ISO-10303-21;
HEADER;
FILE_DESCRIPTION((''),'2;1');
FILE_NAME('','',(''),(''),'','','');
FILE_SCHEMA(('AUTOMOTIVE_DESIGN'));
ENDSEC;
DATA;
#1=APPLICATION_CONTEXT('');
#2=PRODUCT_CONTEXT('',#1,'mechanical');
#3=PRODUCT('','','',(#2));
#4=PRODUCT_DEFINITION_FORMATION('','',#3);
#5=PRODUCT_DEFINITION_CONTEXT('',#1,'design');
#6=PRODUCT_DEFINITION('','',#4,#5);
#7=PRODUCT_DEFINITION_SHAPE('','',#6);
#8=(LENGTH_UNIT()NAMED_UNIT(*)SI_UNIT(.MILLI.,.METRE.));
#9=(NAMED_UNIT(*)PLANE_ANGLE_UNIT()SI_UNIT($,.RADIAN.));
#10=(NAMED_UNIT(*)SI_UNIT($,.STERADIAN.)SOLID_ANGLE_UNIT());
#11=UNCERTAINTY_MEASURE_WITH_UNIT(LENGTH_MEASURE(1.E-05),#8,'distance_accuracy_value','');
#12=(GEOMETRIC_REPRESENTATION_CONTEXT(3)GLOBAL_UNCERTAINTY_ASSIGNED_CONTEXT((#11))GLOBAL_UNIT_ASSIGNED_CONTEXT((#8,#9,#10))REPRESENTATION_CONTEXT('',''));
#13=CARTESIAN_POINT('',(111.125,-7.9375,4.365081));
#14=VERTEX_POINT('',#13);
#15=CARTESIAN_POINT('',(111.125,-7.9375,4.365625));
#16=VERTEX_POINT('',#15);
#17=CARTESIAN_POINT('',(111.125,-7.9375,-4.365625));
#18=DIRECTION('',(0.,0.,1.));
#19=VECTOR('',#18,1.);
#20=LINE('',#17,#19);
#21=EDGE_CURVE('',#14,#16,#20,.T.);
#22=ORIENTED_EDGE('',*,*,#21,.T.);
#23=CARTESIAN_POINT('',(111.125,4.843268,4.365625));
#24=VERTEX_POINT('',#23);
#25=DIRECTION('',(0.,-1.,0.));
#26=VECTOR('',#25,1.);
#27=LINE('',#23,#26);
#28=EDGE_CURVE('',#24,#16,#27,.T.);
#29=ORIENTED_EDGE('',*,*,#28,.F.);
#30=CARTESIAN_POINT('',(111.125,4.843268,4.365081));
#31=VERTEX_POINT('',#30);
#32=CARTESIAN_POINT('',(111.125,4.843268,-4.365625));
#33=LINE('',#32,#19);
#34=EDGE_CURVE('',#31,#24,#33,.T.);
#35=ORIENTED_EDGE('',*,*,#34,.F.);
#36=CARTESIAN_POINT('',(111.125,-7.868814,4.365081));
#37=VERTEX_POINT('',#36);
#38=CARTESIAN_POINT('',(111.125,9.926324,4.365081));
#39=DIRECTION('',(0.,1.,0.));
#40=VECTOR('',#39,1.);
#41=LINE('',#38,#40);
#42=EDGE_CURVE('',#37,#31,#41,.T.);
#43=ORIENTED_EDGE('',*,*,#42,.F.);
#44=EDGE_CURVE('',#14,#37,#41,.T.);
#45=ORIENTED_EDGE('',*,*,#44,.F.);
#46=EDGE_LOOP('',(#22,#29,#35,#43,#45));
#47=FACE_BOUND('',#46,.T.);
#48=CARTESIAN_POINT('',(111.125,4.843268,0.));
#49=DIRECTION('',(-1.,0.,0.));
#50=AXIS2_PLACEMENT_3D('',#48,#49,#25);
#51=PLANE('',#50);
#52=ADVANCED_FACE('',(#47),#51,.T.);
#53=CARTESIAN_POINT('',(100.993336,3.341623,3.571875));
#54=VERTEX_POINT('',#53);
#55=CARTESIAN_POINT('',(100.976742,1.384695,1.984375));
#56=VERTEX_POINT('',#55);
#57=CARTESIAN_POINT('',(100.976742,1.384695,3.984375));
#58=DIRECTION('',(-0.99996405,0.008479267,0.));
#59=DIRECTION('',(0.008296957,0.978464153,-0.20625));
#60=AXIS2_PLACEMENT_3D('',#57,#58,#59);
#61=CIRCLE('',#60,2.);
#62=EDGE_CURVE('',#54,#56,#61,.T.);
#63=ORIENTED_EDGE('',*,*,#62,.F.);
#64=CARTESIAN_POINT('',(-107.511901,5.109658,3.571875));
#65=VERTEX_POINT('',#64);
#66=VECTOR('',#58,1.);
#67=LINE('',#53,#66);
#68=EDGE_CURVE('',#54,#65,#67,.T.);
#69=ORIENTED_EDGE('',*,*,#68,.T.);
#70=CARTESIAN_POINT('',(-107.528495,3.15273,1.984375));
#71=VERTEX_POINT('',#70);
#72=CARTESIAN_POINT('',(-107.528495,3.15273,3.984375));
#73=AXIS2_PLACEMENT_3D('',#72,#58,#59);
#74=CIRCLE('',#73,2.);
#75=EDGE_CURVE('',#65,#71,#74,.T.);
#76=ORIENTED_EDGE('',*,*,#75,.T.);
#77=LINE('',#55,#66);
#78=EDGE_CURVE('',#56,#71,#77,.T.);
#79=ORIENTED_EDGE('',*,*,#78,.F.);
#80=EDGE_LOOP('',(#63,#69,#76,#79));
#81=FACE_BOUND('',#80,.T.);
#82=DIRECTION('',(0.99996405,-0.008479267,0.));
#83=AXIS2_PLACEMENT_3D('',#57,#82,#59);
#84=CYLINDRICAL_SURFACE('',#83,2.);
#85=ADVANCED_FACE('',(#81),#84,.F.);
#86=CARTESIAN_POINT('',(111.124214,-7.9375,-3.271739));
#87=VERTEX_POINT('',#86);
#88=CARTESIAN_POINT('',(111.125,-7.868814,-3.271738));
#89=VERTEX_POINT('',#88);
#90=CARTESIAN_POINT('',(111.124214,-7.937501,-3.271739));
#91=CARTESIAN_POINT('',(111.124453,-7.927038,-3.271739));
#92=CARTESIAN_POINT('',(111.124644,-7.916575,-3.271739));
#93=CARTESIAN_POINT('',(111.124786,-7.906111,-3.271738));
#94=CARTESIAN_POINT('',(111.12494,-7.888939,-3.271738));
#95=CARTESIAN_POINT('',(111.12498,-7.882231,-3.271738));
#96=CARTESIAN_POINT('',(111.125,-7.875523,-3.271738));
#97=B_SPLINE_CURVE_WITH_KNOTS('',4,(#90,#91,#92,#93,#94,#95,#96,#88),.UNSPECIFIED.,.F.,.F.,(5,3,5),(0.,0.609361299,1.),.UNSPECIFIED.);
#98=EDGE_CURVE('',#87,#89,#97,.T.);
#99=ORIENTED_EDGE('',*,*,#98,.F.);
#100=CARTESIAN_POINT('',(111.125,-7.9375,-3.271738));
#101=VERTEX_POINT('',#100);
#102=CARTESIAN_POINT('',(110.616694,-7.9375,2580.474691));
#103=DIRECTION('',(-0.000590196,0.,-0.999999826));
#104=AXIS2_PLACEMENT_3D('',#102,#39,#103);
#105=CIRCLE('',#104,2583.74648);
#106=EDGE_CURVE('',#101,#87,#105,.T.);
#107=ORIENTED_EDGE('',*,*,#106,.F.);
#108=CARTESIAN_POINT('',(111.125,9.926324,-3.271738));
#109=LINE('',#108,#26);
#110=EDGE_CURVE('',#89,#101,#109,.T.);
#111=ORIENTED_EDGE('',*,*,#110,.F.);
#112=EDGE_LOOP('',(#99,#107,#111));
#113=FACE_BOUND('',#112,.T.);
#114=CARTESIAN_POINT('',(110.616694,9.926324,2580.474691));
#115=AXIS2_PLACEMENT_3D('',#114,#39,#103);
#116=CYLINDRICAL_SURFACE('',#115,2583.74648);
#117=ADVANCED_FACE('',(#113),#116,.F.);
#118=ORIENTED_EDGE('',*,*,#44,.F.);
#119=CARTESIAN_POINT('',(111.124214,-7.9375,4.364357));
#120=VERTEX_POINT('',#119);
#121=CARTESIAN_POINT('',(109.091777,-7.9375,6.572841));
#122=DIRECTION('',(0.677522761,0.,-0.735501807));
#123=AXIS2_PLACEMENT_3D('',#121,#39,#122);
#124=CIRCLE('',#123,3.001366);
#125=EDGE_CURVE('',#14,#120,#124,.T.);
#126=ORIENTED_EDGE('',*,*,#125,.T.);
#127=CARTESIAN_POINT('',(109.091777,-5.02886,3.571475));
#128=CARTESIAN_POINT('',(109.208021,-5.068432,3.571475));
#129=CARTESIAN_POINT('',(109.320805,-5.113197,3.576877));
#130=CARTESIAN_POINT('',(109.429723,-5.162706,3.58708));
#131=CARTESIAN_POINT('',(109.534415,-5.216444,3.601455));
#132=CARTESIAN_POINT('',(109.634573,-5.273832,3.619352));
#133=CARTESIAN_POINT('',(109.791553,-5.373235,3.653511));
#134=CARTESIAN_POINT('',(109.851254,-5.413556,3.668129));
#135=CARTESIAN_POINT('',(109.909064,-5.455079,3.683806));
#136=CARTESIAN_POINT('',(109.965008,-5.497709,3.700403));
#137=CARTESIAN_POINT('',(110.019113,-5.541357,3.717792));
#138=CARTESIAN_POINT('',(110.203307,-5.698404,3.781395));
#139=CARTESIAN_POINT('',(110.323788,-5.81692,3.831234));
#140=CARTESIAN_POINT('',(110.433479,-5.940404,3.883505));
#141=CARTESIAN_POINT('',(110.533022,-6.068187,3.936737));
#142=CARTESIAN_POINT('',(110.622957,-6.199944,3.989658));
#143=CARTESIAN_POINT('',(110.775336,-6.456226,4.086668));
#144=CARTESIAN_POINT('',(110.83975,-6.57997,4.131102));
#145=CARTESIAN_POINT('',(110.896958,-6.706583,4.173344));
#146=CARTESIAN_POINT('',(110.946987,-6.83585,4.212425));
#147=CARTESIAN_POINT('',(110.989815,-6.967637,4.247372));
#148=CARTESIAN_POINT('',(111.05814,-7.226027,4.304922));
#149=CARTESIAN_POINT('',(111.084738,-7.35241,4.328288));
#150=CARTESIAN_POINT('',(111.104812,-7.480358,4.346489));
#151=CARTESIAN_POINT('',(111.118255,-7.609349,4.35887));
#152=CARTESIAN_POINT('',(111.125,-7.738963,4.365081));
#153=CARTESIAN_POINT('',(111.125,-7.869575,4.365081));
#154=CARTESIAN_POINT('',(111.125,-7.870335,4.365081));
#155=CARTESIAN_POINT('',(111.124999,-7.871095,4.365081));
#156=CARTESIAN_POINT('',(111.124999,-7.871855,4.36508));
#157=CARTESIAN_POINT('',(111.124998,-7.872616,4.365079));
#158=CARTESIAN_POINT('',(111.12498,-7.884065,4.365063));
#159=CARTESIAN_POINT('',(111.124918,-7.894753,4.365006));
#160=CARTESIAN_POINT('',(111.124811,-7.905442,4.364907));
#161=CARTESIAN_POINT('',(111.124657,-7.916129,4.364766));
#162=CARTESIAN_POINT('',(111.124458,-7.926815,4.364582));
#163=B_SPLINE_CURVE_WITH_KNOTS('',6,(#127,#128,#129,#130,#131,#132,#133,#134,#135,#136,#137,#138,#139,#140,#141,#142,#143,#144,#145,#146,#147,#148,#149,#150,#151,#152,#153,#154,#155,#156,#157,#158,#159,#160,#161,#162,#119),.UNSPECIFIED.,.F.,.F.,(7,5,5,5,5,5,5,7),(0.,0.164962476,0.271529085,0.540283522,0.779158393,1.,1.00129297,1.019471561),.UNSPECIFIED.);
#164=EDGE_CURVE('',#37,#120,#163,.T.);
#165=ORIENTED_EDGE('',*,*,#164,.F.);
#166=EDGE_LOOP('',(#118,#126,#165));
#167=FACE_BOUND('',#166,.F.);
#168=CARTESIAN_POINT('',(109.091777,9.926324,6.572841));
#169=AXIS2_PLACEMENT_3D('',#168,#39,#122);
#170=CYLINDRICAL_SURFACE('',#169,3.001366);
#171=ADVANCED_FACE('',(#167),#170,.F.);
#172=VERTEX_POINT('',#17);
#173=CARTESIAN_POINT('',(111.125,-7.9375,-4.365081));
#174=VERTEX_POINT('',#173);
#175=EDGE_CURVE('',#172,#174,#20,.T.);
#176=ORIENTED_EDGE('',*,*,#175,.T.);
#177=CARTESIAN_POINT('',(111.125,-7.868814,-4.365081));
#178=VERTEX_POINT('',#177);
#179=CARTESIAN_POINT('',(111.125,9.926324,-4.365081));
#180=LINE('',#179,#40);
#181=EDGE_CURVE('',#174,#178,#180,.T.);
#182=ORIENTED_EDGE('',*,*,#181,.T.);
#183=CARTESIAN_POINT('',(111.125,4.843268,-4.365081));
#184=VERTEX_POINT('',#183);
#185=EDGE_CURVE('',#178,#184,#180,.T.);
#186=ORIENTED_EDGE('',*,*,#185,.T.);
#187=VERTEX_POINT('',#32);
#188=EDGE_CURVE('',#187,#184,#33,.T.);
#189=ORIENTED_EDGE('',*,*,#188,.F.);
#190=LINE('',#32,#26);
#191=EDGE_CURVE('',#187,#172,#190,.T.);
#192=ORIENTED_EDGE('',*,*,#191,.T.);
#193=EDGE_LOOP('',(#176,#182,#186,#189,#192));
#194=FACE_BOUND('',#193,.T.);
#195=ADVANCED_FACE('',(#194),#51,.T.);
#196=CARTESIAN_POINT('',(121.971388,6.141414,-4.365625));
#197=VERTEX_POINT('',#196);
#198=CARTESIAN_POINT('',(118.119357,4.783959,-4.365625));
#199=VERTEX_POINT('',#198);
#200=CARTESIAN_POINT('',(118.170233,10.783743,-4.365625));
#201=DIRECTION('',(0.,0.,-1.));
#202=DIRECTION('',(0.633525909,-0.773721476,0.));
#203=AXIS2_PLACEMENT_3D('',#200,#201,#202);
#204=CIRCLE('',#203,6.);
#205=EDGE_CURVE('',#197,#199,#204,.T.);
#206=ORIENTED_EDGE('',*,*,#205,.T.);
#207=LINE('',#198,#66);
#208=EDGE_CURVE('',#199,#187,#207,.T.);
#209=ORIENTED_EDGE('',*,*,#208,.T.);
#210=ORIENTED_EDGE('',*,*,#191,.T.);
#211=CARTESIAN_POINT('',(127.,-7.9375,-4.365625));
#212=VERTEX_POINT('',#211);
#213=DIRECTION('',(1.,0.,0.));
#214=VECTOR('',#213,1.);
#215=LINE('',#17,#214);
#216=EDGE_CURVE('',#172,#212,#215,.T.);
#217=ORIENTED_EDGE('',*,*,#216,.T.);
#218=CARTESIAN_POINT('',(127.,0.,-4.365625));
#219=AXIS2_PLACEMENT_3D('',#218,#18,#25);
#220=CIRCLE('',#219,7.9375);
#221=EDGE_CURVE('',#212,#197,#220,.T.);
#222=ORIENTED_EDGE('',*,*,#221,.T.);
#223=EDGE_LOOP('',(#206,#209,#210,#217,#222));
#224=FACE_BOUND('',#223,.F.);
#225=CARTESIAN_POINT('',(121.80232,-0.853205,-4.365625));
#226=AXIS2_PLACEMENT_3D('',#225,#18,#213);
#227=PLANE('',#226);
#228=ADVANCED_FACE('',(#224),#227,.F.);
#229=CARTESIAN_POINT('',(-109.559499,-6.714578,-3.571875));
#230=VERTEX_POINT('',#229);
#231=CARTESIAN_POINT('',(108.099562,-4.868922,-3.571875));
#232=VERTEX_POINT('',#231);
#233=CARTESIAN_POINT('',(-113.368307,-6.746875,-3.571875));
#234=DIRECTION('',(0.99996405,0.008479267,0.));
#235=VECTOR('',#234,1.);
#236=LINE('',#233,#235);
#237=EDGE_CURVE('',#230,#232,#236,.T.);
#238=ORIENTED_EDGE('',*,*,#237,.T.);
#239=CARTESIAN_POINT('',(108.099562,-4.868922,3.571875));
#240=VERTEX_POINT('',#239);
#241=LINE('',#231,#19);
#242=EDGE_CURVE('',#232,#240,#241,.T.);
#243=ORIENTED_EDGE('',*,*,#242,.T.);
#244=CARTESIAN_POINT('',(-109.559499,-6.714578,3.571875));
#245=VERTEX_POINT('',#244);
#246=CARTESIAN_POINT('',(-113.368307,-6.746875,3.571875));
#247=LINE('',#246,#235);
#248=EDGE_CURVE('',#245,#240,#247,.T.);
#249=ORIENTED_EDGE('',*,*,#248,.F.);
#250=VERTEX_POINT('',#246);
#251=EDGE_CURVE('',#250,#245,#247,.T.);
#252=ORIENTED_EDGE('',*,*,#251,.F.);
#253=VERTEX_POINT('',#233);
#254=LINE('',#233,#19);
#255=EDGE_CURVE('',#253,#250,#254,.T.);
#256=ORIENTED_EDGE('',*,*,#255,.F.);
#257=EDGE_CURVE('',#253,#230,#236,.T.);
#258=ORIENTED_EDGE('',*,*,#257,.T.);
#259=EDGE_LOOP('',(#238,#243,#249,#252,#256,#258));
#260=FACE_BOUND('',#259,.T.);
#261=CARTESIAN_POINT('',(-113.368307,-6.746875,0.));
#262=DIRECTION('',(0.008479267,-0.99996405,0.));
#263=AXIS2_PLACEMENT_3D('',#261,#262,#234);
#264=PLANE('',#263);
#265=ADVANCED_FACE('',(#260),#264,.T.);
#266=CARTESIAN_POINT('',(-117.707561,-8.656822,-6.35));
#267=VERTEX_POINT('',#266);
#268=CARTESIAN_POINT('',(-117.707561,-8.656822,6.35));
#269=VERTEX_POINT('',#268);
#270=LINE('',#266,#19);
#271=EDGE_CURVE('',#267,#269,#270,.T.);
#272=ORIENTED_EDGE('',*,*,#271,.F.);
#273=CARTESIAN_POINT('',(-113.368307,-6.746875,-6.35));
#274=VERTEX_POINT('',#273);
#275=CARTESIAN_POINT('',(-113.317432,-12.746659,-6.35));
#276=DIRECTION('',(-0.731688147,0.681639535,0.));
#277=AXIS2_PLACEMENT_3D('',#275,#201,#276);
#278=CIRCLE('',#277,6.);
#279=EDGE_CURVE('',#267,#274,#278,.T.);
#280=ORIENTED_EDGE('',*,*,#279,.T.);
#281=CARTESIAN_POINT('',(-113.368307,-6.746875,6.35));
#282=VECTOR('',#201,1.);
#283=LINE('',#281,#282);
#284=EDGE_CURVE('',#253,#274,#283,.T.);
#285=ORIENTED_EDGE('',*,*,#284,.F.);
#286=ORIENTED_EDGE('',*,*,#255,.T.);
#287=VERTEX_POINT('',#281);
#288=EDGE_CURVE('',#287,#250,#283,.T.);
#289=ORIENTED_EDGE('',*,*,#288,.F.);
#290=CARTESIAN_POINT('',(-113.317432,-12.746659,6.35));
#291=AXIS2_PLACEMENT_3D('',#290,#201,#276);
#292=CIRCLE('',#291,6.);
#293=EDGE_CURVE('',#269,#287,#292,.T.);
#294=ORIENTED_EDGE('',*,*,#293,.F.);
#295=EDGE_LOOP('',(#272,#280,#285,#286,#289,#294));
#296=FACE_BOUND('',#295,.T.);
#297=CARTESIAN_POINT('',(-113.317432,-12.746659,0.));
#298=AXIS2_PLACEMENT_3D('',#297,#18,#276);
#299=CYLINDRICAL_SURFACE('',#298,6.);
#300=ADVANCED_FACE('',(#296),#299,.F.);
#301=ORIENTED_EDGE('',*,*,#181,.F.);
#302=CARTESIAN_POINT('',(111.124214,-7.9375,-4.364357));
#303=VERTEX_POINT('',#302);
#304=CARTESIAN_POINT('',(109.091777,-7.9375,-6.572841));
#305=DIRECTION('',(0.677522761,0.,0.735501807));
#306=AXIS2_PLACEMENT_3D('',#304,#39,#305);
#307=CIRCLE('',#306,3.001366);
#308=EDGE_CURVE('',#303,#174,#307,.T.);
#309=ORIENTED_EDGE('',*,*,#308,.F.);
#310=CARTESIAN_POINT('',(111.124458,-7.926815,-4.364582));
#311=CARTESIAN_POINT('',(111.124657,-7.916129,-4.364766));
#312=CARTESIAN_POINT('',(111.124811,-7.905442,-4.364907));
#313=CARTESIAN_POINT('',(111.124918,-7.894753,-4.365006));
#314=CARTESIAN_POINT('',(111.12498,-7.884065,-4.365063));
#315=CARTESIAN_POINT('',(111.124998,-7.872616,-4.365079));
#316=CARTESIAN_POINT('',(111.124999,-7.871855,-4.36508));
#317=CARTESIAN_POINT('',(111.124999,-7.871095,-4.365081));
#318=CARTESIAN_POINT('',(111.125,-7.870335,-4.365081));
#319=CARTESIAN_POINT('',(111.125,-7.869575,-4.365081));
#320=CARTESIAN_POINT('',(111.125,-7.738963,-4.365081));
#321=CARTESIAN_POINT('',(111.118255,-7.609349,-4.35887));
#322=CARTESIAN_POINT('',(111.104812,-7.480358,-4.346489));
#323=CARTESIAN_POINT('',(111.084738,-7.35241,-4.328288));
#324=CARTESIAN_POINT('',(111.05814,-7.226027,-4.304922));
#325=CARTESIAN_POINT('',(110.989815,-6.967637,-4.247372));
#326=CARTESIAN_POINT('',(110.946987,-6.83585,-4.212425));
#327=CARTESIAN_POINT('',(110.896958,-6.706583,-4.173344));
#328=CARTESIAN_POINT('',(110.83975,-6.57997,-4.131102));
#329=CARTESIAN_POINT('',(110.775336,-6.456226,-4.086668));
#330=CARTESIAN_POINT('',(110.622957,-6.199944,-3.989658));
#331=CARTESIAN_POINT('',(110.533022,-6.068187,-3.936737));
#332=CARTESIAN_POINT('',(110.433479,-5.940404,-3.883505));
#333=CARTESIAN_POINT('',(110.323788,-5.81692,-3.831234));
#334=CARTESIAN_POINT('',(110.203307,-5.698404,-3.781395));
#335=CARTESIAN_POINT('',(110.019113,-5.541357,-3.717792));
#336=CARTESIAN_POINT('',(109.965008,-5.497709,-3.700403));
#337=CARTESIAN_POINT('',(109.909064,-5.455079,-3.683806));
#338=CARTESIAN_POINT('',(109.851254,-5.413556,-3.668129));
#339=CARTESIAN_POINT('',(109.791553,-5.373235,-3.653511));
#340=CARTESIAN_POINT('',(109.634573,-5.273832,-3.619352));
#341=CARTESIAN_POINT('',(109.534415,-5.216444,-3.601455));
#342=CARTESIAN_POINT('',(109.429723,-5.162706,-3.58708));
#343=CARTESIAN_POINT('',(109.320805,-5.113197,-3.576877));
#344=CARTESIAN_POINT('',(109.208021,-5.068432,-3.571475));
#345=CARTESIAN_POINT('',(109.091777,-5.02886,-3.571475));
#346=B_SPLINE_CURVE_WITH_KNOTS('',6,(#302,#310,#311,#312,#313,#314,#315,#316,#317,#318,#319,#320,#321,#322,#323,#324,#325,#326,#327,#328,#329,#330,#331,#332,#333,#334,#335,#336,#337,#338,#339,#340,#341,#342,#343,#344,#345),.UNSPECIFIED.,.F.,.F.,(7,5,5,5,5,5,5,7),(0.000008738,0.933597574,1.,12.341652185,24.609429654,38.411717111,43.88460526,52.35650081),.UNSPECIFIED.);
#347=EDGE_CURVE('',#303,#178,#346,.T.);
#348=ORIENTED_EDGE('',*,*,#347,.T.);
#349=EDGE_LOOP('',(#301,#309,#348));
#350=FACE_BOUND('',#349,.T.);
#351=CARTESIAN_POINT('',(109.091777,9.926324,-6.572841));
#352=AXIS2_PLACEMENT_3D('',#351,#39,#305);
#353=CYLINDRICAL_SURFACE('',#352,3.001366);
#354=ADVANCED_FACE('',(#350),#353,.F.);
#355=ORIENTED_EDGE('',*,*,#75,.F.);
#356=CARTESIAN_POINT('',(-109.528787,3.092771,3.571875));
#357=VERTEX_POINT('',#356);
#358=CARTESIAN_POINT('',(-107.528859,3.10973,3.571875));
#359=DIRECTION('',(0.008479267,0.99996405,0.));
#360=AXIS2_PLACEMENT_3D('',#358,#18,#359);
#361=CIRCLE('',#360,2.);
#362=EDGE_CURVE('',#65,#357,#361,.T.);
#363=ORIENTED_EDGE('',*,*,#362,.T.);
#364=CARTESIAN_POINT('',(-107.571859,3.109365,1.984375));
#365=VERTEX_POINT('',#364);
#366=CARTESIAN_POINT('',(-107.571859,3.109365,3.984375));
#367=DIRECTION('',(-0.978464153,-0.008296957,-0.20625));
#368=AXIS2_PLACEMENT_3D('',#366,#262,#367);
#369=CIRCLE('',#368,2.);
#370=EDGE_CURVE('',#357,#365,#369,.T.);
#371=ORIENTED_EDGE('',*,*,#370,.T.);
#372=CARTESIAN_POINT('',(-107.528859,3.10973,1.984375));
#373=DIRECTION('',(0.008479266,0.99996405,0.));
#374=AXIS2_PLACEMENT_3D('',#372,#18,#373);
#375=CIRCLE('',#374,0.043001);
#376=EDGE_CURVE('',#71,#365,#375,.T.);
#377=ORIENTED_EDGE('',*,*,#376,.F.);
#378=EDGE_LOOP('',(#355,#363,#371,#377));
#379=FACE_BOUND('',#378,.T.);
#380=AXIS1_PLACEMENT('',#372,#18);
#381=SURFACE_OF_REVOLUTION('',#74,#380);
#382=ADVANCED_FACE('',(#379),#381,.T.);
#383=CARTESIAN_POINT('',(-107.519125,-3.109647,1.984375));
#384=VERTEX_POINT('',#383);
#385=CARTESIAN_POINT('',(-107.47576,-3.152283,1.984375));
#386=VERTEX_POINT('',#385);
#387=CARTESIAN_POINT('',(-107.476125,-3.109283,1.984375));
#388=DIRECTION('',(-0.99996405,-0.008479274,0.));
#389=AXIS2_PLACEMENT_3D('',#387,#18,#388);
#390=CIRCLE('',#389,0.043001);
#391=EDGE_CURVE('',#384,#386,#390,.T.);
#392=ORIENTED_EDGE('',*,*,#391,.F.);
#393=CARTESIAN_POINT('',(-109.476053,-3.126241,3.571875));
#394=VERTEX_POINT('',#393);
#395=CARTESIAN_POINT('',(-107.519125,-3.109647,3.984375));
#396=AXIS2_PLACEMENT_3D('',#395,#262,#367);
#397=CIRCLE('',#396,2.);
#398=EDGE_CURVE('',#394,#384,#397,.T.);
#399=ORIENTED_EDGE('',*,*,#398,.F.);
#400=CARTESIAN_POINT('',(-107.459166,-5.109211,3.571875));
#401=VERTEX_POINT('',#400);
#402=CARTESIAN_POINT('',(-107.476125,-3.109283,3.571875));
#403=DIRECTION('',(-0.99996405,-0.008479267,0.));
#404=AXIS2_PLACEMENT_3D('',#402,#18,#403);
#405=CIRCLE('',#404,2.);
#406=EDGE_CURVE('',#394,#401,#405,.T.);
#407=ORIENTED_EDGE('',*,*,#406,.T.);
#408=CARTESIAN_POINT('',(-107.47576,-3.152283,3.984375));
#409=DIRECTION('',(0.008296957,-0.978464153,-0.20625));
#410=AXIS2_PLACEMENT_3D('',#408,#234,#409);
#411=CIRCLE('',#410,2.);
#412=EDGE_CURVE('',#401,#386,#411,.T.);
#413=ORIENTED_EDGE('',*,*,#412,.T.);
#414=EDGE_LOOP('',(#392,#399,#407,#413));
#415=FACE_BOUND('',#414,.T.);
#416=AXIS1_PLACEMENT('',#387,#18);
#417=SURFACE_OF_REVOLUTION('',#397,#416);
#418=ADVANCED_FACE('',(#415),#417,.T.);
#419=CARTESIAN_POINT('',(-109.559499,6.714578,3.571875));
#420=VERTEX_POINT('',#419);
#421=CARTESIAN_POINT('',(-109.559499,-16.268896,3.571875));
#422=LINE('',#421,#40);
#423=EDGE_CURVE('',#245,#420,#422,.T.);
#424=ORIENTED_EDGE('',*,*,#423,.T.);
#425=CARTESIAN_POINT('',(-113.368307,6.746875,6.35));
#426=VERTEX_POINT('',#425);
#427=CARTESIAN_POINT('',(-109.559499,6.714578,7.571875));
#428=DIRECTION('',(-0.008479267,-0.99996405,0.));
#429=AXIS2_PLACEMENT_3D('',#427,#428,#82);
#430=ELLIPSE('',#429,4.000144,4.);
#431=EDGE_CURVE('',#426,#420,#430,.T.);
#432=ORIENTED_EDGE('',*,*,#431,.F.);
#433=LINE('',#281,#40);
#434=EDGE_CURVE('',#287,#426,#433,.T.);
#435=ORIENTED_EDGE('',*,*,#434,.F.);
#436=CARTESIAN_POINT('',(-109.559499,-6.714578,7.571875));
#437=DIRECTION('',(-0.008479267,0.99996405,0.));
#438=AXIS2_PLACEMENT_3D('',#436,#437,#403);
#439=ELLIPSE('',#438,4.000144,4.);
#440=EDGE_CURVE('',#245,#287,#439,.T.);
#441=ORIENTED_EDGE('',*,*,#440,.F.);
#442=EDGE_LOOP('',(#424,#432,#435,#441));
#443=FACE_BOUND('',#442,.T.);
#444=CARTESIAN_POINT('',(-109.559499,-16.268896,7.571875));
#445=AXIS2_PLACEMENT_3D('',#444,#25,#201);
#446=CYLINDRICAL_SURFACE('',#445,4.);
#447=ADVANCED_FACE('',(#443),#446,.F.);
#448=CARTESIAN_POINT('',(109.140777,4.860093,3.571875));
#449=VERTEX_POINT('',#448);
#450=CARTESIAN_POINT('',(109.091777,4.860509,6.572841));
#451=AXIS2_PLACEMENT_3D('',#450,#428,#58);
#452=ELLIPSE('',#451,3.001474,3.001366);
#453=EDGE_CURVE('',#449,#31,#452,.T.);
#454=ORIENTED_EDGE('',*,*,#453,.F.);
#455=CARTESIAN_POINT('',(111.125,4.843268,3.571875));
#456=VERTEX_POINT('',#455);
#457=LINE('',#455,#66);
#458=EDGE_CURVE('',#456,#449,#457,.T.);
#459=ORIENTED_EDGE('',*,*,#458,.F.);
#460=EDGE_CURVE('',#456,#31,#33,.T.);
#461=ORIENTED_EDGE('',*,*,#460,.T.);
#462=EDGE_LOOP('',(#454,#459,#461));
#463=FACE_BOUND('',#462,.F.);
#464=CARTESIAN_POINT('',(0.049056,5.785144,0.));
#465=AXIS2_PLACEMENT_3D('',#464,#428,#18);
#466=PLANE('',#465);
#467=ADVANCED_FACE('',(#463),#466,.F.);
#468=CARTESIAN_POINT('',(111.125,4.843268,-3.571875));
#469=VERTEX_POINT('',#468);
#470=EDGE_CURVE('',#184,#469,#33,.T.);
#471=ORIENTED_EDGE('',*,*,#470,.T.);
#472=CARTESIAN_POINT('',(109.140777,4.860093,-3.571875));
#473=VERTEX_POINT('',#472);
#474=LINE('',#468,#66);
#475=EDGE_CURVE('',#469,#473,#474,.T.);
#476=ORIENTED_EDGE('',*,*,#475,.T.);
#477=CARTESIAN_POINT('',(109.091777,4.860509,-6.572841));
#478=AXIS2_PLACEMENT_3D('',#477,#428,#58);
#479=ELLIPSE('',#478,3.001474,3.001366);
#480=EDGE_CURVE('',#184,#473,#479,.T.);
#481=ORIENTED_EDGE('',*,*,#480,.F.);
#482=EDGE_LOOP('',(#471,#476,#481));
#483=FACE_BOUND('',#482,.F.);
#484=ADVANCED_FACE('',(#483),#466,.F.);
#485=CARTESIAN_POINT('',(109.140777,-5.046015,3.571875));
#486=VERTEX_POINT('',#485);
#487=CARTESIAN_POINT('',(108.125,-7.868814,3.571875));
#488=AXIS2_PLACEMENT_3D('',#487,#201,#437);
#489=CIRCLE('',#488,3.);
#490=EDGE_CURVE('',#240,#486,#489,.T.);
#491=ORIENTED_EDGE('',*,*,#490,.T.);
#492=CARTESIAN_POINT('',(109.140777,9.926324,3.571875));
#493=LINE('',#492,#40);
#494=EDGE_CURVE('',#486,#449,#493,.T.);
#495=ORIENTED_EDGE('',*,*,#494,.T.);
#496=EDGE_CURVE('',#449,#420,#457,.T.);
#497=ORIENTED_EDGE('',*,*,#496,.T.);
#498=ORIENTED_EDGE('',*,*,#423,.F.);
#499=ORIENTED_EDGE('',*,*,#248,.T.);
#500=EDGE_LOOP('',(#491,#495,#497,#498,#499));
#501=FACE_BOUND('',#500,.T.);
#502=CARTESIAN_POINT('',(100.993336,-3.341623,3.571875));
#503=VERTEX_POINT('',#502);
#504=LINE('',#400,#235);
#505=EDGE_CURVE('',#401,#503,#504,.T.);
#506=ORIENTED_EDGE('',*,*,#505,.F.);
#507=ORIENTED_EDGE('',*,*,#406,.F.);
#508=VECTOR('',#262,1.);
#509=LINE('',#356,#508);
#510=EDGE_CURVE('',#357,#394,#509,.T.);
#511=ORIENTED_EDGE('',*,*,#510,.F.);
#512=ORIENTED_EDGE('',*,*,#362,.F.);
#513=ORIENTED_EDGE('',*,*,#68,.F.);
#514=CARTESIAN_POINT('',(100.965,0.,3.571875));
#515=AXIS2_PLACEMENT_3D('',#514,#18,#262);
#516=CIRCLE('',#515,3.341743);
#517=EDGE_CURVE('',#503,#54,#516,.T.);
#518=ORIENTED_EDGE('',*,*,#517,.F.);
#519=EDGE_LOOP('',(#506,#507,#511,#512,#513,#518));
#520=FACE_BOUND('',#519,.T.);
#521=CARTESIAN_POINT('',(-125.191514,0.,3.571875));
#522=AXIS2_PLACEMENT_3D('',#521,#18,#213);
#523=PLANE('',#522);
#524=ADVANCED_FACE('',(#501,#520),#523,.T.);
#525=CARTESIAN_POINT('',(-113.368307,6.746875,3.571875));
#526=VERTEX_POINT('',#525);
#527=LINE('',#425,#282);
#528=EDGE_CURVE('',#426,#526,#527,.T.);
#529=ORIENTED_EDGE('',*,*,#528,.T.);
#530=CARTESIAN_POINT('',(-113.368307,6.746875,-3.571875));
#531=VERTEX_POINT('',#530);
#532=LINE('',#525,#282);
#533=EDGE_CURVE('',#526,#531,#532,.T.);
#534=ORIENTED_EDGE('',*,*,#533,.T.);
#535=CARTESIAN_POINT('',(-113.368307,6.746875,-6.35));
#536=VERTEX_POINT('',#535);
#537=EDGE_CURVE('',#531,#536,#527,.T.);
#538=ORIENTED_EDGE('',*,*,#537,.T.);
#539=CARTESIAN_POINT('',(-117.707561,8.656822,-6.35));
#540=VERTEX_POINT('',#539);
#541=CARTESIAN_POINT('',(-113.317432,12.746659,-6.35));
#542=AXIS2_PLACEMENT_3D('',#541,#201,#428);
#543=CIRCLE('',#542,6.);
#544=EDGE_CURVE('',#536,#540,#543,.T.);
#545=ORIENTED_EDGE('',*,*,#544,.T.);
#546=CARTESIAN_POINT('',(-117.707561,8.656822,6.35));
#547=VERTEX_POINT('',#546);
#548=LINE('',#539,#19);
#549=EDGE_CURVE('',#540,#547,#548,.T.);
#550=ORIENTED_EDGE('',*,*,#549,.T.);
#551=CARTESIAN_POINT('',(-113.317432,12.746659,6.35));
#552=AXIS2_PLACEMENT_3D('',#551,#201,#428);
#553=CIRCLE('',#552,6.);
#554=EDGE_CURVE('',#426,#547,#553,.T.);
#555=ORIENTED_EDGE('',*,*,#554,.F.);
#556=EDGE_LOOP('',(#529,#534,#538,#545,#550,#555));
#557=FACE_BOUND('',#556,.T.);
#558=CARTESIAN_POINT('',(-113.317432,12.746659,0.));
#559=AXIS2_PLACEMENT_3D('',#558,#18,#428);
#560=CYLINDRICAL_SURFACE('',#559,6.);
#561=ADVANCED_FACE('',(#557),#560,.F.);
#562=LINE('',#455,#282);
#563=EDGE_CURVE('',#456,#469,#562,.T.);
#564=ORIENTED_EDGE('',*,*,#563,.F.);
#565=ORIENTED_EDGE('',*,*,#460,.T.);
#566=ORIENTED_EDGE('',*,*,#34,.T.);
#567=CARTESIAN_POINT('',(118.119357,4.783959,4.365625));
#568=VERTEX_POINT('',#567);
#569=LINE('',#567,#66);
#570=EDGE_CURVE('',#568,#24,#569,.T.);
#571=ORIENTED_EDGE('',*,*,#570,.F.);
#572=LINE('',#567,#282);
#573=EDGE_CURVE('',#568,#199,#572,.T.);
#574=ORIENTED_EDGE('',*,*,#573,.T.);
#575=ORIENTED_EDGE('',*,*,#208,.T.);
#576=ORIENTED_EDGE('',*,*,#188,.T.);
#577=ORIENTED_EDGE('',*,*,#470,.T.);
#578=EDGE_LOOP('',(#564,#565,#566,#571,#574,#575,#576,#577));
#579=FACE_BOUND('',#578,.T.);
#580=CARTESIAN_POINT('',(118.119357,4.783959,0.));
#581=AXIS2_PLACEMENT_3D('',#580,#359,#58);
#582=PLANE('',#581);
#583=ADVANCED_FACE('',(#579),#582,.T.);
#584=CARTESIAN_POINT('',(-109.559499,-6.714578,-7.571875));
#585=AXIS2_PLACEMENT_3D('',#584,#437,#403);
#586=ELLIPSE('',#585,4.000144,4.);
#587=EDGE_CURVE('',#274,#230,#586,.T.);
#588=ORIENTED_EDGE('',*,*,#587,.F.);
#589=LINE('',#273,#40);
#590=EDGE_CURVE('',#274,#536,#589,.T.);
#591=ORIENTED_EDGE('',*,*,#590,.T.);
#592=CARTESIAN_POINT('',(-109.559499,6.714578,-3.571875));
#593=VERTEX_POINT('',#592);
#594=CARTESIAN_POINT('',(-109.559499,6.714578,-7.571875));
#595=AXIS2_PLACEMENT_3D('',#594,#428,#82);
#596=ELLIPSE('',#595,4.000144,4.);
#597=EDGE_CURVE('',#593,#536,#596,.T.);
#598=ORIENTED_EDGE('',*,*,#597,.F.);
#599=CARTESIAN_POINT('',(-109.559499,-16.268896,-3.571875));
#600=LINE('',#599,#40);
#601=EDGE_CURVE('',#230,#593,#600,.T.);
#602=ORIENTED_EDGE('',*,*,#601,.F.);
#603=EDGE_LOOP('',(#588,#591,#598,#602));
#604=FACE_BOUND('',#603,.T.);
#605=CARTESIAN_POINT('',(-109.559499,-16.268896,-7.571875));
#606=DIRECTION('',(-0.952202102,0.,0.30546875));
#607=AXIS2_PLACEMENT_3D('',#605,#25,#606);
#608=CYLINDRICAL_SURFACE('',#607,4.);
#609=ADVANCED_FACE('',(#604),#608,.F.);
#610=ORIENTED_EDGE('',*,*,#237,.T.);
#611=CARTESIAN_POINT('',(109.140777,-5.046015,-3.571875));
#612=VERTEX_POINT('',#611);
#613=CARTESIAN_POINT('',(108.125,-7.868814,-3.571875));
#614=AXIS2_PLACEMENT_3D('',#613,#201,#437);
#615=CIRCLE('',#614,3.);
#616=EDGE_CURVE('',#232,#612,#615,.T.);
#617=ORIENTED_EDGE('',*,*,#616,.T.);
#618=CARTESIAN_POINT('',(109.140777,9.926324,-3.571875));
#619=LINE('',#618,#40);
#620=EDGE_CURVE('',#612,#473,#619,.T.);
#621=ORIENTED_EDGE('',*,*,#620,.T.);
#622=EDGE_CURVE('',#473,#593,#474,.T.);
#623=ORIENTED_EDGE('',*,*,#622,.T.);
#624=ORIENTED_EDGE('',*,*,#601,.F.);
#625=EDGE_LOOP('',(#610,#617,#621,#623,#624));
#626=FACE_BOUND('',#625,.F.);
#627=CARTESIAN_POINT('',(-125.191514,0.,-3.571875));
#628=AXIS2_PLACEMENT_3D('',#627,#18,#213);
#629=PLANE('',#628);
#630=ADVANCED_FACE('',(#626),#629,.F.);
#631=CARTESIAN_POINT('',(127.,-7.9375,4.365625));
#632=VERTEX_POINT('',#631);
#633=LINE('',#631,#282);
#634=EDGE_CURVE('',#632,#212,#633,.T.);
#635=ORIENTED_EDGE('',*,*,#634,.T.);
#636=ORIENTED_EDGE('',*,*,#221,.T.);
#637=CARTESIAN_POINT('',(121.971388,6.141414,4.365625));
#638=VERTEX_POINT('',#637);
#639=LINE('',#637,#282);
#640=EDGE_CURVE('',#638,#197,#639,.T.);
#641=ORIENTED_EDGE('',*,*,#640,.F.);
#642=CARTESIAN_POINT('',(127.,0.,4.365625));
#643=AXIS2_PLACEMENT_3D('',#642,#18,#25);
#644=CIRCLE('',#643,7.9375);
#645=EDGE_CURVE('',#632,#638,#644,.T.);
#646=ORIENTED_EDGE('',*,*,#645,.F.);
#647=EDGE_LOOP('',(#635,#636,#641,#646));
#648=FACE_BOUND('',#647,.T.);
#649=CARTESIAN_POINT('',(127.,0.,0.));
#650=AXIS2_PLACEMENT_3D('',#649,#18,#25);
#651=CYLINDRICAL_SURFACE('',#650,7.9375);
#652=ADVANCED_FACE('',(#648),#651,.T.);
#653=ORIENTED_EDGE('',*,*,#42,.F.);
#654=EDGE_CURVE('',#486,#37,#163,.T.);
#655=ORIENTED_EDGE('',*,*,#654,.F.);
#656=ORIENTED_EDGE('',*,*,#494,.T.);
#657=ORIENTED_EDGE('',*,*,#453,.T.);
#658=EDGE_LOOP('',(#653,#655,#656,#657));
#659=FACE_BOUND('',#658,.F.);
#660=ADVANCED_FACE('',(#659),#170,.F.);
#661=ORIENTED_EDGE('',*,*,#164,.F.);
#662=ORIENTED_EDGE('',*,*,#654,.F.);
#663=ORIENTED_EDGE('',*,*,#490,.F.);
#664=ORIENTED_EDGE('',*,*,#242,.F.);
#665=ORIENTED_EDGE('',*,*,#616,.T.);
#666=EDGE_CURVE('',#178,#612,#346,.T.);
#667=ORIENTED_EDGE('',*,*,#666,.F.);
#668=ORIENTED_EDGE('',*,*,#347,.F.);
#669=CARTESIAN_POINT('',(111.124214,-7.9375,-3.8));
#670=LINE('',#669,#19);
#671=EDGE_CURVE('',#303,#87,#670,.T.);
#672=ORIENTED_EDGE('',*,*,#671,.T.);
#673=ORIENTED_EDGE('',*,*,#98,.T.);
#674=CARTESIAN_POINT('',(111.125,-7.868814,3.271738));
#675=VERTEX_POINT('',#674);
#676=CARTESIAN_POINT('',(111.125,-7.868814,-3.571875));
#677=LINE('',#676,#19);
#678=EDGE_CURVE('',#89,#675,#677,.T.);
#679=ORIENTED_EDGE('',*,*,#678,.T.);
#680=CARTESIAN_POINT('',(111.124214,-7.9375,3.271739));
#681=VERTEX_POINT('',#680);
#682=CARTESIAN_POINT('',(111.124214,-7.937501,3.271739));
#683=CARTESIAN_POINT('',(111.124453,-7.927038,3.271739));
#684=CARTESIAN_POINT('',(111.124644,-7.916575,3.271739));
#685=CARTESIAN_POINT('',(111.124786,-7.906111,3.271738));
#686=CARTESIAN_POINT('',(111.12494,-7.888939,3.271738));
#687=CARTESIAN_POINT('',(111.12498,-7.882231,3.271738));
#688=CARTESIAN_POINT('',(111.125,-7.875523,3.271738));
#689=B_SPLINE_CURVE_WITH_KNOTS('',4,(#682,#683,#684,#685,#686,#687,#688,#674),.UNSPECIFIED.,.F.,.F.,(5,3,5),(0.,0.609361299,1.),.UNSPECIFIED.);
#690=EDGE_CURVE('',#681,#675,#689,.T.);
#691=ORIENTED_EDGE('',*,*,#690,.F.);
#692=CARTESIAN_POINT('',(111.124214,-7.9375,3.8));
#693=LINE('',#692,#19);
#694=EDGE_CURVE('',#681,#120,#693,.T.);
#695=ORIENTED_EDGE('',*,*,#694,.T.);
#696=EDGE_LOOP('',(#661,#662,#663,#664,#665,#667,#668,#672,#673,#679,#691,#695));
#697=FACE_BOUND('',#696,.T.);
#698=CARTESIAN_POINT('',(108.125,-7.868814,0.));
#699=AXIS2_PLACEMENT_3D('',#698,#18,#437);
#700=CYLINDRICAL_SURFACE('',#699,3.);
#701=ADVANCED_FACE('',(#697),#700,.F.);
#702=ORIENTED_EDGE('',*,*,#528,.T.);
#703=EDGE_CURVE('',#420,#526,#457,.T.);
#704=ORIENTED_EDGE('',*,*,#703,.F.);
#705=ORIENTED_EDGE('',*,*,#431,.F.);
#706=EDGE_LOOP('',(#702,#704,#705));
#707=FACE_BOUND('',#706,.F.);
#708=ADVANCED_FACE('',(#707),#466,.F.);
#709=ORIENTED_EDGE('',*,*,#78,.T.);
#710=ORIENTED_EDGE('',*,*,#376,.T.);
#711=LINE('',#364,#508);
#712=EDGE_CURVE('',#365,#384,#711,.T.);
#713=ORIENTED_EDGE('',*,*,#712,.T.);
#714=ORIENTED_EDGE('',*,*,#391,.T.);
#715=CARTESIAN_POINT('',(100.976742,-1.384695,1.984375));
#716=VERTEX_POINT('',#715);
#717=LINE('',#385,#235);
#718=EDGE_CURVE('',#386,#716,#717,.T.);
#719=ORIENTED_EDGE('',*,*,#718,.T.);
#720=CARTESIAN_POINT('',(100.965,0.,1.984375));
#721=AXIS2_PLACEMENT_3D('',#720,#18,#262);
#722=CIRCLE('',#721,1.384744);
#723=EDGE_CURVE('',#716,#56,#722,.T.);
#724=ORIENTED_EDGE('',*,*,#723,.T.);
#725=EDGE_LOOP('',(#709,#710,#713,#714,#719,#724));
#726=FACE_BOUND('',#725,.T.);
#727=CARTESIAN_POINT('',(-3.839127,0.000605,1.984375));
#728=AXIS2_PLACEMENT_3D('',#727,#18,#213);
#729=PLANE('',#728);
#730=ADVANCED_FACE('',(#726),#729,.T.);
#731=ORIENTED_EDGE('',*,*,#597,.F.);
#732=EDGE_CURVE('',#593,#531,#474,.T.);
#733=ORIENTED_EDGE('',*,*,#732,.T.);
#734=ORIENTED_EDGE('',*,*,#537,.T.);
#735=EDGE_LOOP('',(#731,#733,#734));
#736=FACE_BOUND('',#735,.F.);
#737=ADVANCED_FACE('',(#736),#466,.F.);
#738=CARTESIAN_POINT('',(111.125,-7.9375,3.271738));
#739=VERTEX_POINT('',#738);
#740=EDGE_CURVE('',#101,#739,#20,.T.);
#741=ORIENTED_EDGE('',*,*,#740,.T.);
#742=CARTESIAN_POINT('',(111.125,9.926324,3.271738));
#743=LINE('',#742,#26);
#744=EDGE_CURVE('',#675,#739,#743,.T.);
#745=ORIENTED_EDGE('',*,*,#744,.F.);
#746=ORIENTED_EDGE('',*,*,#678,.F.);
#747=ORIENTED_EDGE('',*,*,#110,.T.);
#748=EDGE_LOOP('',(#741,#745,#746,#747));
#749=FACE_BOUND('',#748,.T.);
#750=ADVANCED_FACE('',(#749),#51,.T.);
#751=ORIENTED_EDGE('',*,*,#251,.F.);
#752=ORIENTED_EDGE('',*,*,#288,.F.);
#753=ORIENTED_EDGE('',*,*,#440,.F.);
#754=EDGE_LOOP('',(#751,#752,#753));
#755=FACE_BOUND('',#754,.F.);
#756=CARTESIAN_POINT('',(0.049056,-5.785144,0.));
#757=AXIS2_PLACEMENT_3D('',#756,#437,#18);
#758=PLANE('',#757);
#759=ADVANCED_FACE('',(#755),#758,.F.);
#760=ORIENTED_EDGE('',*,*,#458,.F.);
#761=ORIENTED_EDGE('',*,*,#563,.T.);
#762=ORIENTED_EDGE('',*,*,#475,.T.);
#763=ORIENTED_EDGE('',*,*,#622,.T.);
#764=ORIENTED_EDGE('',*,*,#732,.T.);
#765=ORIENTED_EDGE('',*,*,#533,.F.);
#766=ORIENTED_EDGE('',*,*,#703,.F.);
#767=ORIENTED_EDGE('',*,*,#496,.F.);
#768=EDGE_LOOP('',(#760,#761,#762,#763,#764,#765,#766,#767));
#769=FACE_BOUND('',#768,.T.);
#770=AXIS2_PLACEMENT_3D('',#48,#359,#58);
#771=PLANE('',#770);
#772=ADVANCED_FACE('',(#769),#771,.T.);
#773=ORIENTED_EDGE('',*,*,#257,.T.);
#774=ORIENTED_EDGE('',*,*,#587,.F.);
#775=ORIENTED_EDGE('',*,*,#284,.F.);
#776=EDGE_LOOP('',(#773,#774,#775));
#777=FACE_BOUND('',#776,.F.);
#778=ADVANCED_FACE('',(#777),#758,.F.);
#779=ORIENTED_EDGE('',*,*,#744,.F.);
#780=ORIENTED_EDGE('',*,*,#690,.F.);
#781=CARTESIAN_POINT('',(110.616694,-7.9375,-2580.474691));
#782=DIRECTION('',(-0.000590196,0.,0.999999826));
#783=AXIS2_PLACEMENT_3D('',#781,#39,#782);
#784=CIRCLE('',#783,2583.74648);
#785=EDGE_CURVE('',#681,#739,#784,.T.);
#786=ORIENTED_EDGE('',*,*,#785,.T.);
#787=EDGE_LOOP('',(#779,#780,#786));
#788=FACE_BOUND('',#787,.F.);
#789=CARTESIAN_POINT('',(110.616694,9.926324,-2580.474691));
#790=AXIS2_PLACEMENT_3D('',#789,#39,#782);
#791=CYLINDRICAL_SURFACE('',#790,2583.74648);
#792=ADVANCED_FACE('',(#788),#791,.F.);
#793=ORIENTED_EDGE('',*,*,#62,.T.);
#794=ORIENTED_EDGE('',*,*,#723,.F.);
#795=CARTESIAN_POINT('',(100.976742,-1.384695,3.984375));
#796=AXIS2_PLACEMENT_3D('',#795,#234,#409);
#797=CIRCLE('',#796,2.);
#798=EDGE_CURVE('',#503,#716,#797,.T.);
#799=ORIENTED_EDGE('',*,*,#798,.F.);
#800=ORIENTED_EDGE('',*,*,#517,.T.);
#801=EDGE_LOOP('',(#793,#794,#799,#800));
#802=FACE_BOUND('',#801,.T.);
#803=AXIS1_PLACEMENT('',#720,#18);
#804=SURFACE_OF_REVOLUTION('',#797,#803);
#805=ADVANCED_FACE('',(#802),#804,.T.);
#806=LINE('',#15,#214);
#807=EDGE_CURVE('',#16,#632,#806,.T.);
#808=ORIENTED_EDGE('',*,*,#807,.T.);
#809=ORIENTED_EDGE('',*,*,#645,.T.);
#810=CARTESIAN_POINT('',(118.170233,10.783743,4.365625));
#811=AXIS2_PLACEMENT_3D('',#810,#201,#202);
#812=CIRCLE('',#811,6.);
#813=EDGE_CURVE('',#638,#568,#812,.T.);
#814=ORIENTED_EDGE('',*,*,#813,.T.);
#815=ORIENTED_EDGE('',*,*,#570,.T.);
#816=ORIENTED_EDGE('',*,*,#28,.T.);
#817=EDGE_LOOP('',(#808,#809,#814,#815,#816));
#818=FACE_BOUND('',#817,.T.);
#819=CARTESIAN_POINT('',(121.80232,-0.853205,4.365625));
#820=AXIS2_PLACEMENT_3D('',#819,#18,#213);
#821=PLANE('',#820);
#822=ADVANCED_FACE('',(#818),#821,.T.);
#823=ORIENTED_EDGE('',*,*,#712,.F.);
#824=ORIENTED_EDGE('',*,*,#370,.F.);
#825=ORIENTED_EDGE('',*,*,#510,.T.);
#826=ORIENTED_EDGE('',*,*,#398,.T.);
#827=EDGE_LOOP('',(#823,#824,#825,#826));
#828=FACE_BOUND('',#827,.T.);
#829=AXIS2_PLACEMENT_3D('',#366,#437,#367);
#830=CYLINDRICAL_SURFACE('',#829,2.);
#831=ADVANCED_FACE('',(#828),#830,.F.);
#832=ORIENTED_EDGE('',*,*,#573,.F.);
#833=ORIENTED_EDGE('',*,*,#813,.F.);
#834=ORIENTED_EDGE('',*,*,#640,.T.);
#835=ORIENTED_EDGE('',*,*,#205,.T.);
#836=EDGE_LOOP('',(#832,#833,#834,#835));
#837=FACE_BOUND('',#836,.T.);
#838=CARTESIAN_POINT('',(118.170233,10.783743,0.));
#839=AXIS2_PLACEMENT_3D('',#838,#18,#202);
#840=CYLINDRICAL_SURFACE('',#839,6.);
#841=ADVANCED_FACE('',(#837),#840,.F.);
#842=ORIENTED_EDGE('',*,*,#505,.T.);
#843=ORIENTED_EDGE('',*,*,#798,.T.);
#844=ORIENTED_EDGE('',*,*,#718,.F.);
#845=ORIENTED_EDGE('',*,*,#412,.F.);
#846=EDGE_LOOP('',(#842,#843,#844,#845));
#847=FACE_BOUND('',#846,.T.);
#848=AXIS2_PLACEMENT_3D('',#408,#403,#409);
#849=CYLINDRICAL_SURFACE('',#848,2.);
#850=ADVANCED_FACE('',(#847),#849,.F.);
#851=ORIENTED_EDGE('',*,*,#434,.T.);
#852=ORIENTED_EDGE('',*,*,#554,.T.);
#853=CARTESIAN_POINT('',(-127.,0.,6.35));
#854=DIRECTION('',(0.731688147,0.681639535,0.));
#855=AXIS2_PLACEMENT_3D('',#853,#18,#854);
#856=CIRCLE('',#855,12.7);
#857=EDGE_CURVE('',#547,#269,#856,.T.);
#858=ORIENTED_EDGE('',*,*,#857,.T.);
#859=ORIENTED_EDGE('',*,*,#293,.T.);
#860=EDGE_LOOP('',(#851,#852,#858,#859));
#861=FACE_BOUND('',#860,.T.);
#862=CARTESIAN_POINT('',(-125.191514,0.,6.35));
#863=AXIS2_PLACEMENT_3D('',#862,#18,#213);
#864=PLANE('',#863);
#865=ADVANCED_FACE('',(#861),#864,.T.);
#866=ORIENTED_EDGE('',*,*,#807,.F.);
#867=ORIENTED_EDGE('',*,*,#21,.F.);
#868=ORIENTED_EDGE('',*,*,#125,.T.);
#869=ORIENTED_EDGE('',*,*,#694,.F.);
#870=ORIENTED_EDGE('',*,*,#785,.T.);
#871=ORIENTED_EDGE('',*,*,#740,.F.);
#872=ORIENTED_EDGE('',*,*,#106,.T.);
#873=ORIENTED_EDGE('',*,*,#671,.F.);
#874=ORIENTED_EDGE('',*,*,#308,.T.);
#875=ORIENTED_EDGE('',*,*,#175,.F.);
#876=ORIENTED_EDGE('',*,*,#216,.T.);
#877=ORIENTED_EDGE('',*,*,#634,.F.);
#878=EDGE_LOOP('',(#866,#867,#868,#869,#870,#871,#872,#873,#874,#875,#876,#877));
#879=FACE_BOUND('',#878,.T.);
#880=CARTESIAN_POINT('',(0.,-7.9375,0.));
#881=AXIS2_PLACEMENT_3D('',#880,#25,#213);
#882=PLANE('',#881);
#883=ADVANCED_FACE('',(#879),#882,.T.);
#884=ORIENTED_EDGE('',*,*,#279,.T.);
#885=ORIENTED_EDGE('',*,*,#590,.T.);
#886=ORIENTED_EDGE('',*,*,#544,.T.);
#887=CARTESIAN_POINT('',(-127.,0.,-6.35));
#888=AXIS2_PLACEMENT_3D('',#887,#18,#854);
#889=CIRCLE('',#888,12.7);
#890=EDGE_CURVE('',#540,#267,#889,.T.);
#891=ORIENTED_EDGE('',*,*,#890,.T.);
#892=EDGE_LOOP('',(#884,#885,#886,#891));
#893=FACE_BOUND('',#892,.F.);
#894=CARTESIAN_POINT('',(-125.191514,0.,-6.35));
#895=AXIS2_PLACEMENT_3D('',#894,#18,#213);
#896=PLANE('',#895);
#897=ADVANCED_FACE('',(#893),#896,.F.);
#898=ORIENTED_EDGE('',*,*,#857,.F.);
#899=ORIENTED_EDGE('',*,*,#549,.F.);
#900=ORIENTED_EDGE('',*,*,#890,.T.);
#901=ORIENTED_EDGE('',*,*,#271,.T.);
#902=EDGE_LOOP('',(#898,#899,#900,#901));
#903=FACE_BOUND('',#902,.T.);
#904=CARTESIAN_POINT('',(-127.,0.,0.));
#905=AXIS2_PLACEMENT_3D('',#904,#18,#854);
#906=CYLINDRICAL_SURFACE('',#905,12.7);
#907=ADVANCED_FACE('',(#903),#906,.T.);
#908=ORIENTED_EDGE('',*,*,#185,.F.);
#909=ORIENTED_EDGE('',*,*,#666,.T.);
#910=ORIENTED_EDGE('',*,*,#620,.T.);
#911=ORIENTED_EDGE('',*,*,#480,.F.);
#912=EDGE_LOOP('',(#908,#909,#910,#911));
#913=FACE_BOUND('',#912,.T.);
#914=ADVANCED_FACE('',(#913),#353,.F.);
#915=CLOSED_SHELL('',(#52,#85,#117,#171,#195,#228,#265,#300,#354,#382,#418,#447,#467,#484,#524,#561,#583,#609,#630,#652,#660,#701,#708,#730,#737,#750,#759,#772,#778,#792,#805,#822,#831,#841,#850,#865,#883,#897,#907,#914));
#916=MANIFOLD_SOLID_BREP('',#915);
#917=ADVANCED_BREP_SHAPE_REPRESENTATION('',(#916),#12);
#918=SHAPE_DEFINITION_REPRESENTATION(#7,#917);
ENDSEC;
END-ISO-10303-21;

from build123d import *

# Parameters (mm, degrees)
F1_DEPTH     = 3.571875
F2_DEPTH     = 6.35
F3_DEPTH     = 4.365625
F4_T4_DEPTH  = 32.5377920371
F4_T10_DEPTH = 32.5377920371
F5_T4_DEPTH  = 22.8781953851
F5_S7_R      = 3
F5_T8_DEPTH  = 13
F5_T12_DEPTH = 22.8781953851
F5_S15_R     = 3
F5_T16_DEPTH = 13
F7_DEPTH     = 1.5875
F8_T1_DEPTH  = 208.4599958687
F8_T3_DEPTH  = 208.5127323296
F8_T5_DEPTH  = 6.2192364317
F8_T8_ANGLE  = 90
F8_T10_ANGLE = 179.0283359547
F8_T12_ANGLE = 90.9716640453


# Not quite as in the source:
# - a fillet or chamfer that OpenCascade refuses, or shapes differently, is made with other operations: its cross-section is extruded or revolved along the edge and cut away or added


with BuildPart() as f1:
    # F0 (on Top) → F1 (new body, symmetric)
    with BuildSketch(Plane.XY):
        with BuildLine():
            ThreePointArc((-113.3683072515, 6.746875), (-115.7345796972, 7.2550843623), (-117.7075605328, 8.656822093))
            ThreePointArc((-117.7075605328, 8.656822093), (-139.7, 0), (-117.7075605328, -8.656822093))
            ThreePointArc((-117.7075605328, -8.656822093), (-115.7345796972, -7.2550843623), (-113.3683072515, -6.746875))
            Line((-113.3683072515, -6.746875), (-113.3683072515, 6.746875))
        make_face()
        with BuildLine():
            Line((111.125, 4.8432679198), (-113.3683072515, 6.746875))
            Line((-113.3683072515, 6.746875), (-113.3683072515, -6.746875))
            Line((-113.3683072515, -6.746875), (108.0995621996, -4.8689223364))
            ThreePointArc((108.0995621996, -4.8689223364), (110.2373075769, -5.7385195078), (111.125, -7.8688144875))
            Line((111.125, -7.8688144875), (111.125, 4.8432679198))
        make_face()
        with BuildLine():
            Line((118.1193570388, 4.7839587683), (111.125, 4.8432679198))
            Line((111.125, 4.8432679198), (111.125, -7.8688144875))
            Line((111.125, -7.8688144875), (111.125, -7.9375))
            Line((111.125, -7.9375), (127, -7.9375))
            ThreePointArc((127, -7.9375), (134.4750044007, 2.6698718057), (121.9713880952, 6.141414215))
            ThreePointArc((121.9713880952, 6.141414215), (120.1644294879, 5.1248404445), (118.1193570388, 4.7839587683))
        make_face()
    extrude(amount=F1_DEPTH, both=True)

    # F0 (on Top) → F2 (join, symmetric)
    with BuildSketch(Plane.XY):
        with BuildLine():
            ThreePointArc((-113.3683072515, 6.746875), (-115.7345796972, 7.2550843623), (-117.7075605328, 8.656822093))
            ThreePointArc((-117.7075605328, 8.656822093), (-139.7, 0), (-117.7075605328, -8.656822093))
            ThreePointArc((-117.7075605328, -8.656822093), (-115.7345796972, -7.2550843623), (-113.3683072515, -6.746875))
            Line((-113.3683072515, -6.746875), (-113.3683072515, 6.746875))
        make_face()
    extrude(amount=F2_DEPTH, both=True)

    # F0 (on Top) → F3 (join, symmetric)
    with BuildSketch(Plane.XY):
        with BuildLine():
            Line((118.1193570388, 4.7839587683), (111.125, 4.8432679198))
            Line((111.125, 4.8432679198), (111.125, -7.8688144875))
            Line((111.125, -7.8688144875), (111.125, -7.9375))
            Line((111.125, -7.9375), (127, -7.9375))
            ThreePointArc((127, -7.9375), (134.4750044007, 2.6698718057), (121.9713880952, 6.141414215))
            ThreePointArc((121.9713880952, 6.141414215), (120.1644294879, 5.1248404445), (118.1193570388, 4.7839587683))
        make_face()
    extrude(amount=F3_DEPTH, both=True)

    # F4: fillet of radius 4 on 2 edges, made by hand


with BuildPart() as f4_tool2:
    # F4_s3 → F4_t4 (new body)
    with BuildSketch(Plane.XZ.offset(16.2688960185)):
        with BuildLine():
            ThreePointArc((-109.5594988441, 3.571875), (-111.9166687573, 4.3401958699), (-113.3683072515, 6.35))
            Line((-113.3683072515, 6.35), (-113.3683072515, 3.571875))
            Line((-113.3683072515, 3.571875), (-109.5594988441, 3.571875))
        make_face()
    extrude(amount=-F4_T4_DEPTH)

    split(bisect_by=Plane(origin=(0.0490555459, 5.7851443476, 0), x_dir=(0, 0, 1), z_dir=(-0.0084792668, -0.9999640504, 0)), keep=Keep.TOP)

    split(bisect_by=Plane(origin=(0.0490555459, -5.7851443476, 0), x_dir=(0, 0, 1), z_dir=(-0.0084792668, 0.9999640504, 0)), keep=Keep.TOP)


with BuildPart() as f1_1:
    add(f1.part)

    # F4_t1: union F4_tool2
    add(f4_tool2.part)


with BuildPart() as f4_tool8:
    # F4_s9 → F4_t10 (new body)
    with BuildSketch(Plane.XZ.offset(16.2688960185)):
        with BuildLine():
            ThreePointArc((-113.3683072515, -6.35), (-111.9166687573, -4.3401958699), (-109.5594988441, -3.571875))
            Line((-109.5594988441, -3.571875), (-113.3683072515, -3.571875))
            Line((-113.3683072515, -3.571875), (-113.3683072515, -6.35))
        make_face()
    extrude(amount=-F4_T10_DEPTH)

    split(bisect_by=Plane(origin=(0.0490555459, 5.7851443476, 0), x_dir=(0, 0, 1), z_dir=(-0.0084792668, -0.9999640504, 0)), keep=Keep.TOP)

    split(bisect_by=Plane(origin=(0.0490555459, -5.7851443476, 0), x_dir=(0, 0, 1), z_dir=(-0.0084792668, 0.9999640504, 0)), keep=Keep.TOP)


with BuildPart() as f1_2:
    add(f1_1.part)

    # F4_t7: union F4_tool8
    add(f4_tool8.part)

    # F5: fillet of radius 3 on 2 edges, made by hand


with BuildPart() as f5_tool2:
    # F5_s3 → F5_t4 (new body)
    with BuildSketch(Plane.XZ.offset(-9.9263244087)):
        with BuildLine():
            ThreePointArc((111.1252710091, -4.3653307993), (110.1832561552, -3.7769740577), (109.0917774438, -3.571475))
            Line((109.0917774438, -3.571475), (109.0917774438, -3.2713384315))
            ThreePointArc((109.0917774438, -3.2713384315), (110.1083887219, -3.2717384315), (111.125, -3.2717384315))
            Line((111.125, -3.2717384315), (111.4251365685, -3.571875))
            ThreePointArc((111.4251365685, -3.571875), (111.4251365685, -3.9686028996), (111.3286203656, -4.1445798107))
            Line((111.3286203656, -4.1445798107), (111.1252710091, -4.3653307993))
        make_face()
    extrude(amount=F5_T4_DEPTH)

    split(bisect_by=Plane(origin=(0.0490555459, 5.7851443476, 0), x_dir=(0, 0, 1), z_dir=(-0.0084792668, -0.9999640504, 0)), keep=Keep.TOP)

    split(bisect_by=Plane.XZ.offset(7.9375), keep=Keep.BOTTOM)

    # F5_s7 → F5_t8 (cut, symmetric)
    with BuildSketch(Plane.XY.offset(-3.8)):
        with Locations((108.125, -7.8688144875)):
            Circle(F5_S7_R)
    extrude(amount=F5_T8_DEPTH, both=True, mode=Mode.SUBTRACT)


with BuildPart() as f1_3:
    add(f1_2.part)

    # F5_t1: union F5_tool2
    add(f5_tool2.part)


with BuildPart() as f5_tool10:
    # F5_s11 → F5_t12 (new body)
    with BuildSketch(Plane.XZ.offset(-9.9263244087)):
        with BuildLine():
            ThreePointArc((111.1252710091, 4.3653307993), (110.1832561552, 3.7769740577), (109.0917774438, 3.571475))
            Line((109.0917774438, 3.571475), (109.0917774438, 3.2713384315))
            ThreePointArc((109.0917774438, 3.2713384315), (110.1083887219, 3.2717384315), (111.125, 3.2717384315))
            Line((111.125, 3.2717384315), (111.4251365685, 3.571875))
            ThreePointArc((111.4251365685, 3.571875), (111.4251365685, 3.9686028996), (111.3286203656, 4.1445798107))
            Line((111.3286203656, 4.1445798107), (111.1252710091, 4.3653307993))
        make_face()
    extrude(amount=F5_T12_DEPTH)

    split(bisect_by=Plane(origin=(0.0490555459, 5.7851443476, 0), x_dir=(0, 0, 1), z_dir=(-0.0084792668, -0.9999640504, 0)), keep=Keep.TOP)

    split(bisect_by=Plane.XZ.offset(7.9375), keep=Keep.BOTTOM)

    # F5_s15 → F5_t16 (cut, symmetric)
    with BuildSketch(Plane.XY.offset(3.8)):
        with Locations((108.125, -7.8688144875)):
            Circle(F5_S15_R)
    extrude(amount=F5_T16_DEPTH, both=True, mode=Mode.SUBTRACT)


with BuildPart() as f1_4:
    add(f1_3.part)

    # F5_t9: union F5_tool10
    add(f5_tool10.part)

    # F6 (on face) → F7 (cut)
    with BuildSketch(Plane.XY.offset(3.571875)):
        with BuildLine():
            Line((-107.4591662774, -5.1092109437), (100.9933355318, -3.3416230224))
            ThreePointArc((100.9933355318, -3.3416230224), (104.3067431568, 0), (100.9933355318, 3.3416230224))
            Line((100.9933355318, 3.3416230224), (-107.5119008424, 5.1096581102))
            ThreePointArc((-107.5119008424, 5.1096581102), (-108.9430729384, 4.5239435719), (-109.5287874768, 3.0927714759))
            Line((-109.5287874768, 3.0927714759), (-109.4760529118, -3.1262413766))
            ThreePointArc((-109.4760529118, -3.1262413766), (-108.8782960389, -4.535437059), (-107.4591662774, -5.1092109437))
        make_face()
    extrude(amount=-F7_DEPTH, mode=Mode.SUBTRACT)

    # F8: fillet of radius 2 on 1 edges, made by hand

    # F8_s2 → F8_t1 (join)
    with BuildSketch(Plane(origin=(-107.4947609873, -0.9115095261, 0), x_dir=(0, 0, 1), z_dir=(0.9999640504, 0.0084792668, 0))):
        with BuildLine():
            ThreePointArc((3.571875, 4.1978523289), (2.4311525433, 3.5008139871), (1.984375, 2.2408536702))
            Line((1.984375, 2.2408536702), (1.984375, 4.1978523289))
            Line((1.984375, 4.1978523289), (3.571875, 4.1978523289))
        make_face()
    extrude(amount=F8_T1_DEPTH)

    # F8_s4 → F8_t3 (join)
    with BuildSketch(Plane(origin=(100.9577408219, -0.8560783953, 0), x_dir=(0, 0, 1), z_dir=(-0.9999640504, 0.0084792668, 0))):
        with BuildLine():
            ThreePointArc((3.571875, 4.1978523289), (2.4311525433, 3.5008139871), (1.984375, 2.2408536702))
            Line((1.984375, 2.2408536702), (1.984375, 4.1978523289))
            Line((1.984375, 4.1978523289), (3.571875, 4.1978523289))
        make_face()
    extrude(amount=F8_T3_DEPTH)

    # F8_s6 → F8_t5 (join)
    with BuildSketch(Plane(origin=(-0.0340983887, 4.0212395356, 0), x_dir=(0, 0, 1), z_dir=(0.0084792668, -0.9999640504, 0))):
        with BuildLine():
            ThreePointArc((3.571875, 109.498625523), (2.4311525433, 108.8015871812), (1.984375, 107.5416268643))
            Line((1.984375, 107.5416268643), (1.984375, 109.498625523))
            Line((1.984375, 109.498625523), (3.571875, 109.498625523))
        make_face()
    extrude(amount=F8_T5_DEPTH)

    # F8_s7 → F8_t8 (revolve)
    with BuildSketch(Plane(origin=(0.0186361763, -2.1977733169, 0), x_dir=(0, 0, 1), z_dir=(-0.0084792668, 0.9999640504, 0))):
        with BuildLine():
            ThreePointArc((3.571875, -109.498625523), (2.4311525433, -108.8015871812), (1.984375, -107.5416268643))
            Line((1.984375, -107.5416268643), (1.984375, -109.498625523))
            Line((1.984375, -109.498625523), (3.571875, -109.498625523))
        make_face()
    revolve(axis=Axis((-107.476124811, -3.109282843, 1.984375), (0, 0, 1)), revolution_arc=F8_T8_ANGLE)

    # F8_s9 → F8_t10 (revolve)
    with BuildSketch(Plane(origin=(100.9577408219, 0.8560783953, 0), x_dir=(0, 0, 1), z_dir=(-0.9999640504, -0.0084792668, 0))):
        with BuildLine():
            ThreePointArc((3.571875, -4.1978523289), (2.4311525433, -3.5008139871), (1.984375, -2.2408536702))
            Line((1.984375, -2.2408536702), (1.984375, -4.1978523289))
            Line((1.984375, -4.1978523289), (3.571875, -4.1978523289))
        make_face()
    revolve(axis=Axis((100.965, 0, 1.984375), (0, 0, 1)), revolution_arc=F8_T10_ANGLE)

    # F8_s11 → F8_t12 (revolve)
    with BuildSketch(Plane(origin=(-107.5474955523, 0.9119566926, 0), x_dir=(0, 0, 1), z_dir=(0.9999640504, -0.0084792668, 0))):
        with BuildLine():
            ThreePointArc((3.571875, -4.1978523289), (2.4311525433, -3.5008139871), (1.984375, -2.2408536702))
            Line((1.984375, -2.2408536702), (1.984375, -4.1978523289))
            Line((1.984375, -4.1978523289), (3.571875, -4.1978523289))
        make_face()
    revolve(axis=Axis((-107.528859376, 3.1097300095, 1.984375), (0, 0, 1)), revolution_arc=F8_T12_ANGLE)


solid = f1_4.part
